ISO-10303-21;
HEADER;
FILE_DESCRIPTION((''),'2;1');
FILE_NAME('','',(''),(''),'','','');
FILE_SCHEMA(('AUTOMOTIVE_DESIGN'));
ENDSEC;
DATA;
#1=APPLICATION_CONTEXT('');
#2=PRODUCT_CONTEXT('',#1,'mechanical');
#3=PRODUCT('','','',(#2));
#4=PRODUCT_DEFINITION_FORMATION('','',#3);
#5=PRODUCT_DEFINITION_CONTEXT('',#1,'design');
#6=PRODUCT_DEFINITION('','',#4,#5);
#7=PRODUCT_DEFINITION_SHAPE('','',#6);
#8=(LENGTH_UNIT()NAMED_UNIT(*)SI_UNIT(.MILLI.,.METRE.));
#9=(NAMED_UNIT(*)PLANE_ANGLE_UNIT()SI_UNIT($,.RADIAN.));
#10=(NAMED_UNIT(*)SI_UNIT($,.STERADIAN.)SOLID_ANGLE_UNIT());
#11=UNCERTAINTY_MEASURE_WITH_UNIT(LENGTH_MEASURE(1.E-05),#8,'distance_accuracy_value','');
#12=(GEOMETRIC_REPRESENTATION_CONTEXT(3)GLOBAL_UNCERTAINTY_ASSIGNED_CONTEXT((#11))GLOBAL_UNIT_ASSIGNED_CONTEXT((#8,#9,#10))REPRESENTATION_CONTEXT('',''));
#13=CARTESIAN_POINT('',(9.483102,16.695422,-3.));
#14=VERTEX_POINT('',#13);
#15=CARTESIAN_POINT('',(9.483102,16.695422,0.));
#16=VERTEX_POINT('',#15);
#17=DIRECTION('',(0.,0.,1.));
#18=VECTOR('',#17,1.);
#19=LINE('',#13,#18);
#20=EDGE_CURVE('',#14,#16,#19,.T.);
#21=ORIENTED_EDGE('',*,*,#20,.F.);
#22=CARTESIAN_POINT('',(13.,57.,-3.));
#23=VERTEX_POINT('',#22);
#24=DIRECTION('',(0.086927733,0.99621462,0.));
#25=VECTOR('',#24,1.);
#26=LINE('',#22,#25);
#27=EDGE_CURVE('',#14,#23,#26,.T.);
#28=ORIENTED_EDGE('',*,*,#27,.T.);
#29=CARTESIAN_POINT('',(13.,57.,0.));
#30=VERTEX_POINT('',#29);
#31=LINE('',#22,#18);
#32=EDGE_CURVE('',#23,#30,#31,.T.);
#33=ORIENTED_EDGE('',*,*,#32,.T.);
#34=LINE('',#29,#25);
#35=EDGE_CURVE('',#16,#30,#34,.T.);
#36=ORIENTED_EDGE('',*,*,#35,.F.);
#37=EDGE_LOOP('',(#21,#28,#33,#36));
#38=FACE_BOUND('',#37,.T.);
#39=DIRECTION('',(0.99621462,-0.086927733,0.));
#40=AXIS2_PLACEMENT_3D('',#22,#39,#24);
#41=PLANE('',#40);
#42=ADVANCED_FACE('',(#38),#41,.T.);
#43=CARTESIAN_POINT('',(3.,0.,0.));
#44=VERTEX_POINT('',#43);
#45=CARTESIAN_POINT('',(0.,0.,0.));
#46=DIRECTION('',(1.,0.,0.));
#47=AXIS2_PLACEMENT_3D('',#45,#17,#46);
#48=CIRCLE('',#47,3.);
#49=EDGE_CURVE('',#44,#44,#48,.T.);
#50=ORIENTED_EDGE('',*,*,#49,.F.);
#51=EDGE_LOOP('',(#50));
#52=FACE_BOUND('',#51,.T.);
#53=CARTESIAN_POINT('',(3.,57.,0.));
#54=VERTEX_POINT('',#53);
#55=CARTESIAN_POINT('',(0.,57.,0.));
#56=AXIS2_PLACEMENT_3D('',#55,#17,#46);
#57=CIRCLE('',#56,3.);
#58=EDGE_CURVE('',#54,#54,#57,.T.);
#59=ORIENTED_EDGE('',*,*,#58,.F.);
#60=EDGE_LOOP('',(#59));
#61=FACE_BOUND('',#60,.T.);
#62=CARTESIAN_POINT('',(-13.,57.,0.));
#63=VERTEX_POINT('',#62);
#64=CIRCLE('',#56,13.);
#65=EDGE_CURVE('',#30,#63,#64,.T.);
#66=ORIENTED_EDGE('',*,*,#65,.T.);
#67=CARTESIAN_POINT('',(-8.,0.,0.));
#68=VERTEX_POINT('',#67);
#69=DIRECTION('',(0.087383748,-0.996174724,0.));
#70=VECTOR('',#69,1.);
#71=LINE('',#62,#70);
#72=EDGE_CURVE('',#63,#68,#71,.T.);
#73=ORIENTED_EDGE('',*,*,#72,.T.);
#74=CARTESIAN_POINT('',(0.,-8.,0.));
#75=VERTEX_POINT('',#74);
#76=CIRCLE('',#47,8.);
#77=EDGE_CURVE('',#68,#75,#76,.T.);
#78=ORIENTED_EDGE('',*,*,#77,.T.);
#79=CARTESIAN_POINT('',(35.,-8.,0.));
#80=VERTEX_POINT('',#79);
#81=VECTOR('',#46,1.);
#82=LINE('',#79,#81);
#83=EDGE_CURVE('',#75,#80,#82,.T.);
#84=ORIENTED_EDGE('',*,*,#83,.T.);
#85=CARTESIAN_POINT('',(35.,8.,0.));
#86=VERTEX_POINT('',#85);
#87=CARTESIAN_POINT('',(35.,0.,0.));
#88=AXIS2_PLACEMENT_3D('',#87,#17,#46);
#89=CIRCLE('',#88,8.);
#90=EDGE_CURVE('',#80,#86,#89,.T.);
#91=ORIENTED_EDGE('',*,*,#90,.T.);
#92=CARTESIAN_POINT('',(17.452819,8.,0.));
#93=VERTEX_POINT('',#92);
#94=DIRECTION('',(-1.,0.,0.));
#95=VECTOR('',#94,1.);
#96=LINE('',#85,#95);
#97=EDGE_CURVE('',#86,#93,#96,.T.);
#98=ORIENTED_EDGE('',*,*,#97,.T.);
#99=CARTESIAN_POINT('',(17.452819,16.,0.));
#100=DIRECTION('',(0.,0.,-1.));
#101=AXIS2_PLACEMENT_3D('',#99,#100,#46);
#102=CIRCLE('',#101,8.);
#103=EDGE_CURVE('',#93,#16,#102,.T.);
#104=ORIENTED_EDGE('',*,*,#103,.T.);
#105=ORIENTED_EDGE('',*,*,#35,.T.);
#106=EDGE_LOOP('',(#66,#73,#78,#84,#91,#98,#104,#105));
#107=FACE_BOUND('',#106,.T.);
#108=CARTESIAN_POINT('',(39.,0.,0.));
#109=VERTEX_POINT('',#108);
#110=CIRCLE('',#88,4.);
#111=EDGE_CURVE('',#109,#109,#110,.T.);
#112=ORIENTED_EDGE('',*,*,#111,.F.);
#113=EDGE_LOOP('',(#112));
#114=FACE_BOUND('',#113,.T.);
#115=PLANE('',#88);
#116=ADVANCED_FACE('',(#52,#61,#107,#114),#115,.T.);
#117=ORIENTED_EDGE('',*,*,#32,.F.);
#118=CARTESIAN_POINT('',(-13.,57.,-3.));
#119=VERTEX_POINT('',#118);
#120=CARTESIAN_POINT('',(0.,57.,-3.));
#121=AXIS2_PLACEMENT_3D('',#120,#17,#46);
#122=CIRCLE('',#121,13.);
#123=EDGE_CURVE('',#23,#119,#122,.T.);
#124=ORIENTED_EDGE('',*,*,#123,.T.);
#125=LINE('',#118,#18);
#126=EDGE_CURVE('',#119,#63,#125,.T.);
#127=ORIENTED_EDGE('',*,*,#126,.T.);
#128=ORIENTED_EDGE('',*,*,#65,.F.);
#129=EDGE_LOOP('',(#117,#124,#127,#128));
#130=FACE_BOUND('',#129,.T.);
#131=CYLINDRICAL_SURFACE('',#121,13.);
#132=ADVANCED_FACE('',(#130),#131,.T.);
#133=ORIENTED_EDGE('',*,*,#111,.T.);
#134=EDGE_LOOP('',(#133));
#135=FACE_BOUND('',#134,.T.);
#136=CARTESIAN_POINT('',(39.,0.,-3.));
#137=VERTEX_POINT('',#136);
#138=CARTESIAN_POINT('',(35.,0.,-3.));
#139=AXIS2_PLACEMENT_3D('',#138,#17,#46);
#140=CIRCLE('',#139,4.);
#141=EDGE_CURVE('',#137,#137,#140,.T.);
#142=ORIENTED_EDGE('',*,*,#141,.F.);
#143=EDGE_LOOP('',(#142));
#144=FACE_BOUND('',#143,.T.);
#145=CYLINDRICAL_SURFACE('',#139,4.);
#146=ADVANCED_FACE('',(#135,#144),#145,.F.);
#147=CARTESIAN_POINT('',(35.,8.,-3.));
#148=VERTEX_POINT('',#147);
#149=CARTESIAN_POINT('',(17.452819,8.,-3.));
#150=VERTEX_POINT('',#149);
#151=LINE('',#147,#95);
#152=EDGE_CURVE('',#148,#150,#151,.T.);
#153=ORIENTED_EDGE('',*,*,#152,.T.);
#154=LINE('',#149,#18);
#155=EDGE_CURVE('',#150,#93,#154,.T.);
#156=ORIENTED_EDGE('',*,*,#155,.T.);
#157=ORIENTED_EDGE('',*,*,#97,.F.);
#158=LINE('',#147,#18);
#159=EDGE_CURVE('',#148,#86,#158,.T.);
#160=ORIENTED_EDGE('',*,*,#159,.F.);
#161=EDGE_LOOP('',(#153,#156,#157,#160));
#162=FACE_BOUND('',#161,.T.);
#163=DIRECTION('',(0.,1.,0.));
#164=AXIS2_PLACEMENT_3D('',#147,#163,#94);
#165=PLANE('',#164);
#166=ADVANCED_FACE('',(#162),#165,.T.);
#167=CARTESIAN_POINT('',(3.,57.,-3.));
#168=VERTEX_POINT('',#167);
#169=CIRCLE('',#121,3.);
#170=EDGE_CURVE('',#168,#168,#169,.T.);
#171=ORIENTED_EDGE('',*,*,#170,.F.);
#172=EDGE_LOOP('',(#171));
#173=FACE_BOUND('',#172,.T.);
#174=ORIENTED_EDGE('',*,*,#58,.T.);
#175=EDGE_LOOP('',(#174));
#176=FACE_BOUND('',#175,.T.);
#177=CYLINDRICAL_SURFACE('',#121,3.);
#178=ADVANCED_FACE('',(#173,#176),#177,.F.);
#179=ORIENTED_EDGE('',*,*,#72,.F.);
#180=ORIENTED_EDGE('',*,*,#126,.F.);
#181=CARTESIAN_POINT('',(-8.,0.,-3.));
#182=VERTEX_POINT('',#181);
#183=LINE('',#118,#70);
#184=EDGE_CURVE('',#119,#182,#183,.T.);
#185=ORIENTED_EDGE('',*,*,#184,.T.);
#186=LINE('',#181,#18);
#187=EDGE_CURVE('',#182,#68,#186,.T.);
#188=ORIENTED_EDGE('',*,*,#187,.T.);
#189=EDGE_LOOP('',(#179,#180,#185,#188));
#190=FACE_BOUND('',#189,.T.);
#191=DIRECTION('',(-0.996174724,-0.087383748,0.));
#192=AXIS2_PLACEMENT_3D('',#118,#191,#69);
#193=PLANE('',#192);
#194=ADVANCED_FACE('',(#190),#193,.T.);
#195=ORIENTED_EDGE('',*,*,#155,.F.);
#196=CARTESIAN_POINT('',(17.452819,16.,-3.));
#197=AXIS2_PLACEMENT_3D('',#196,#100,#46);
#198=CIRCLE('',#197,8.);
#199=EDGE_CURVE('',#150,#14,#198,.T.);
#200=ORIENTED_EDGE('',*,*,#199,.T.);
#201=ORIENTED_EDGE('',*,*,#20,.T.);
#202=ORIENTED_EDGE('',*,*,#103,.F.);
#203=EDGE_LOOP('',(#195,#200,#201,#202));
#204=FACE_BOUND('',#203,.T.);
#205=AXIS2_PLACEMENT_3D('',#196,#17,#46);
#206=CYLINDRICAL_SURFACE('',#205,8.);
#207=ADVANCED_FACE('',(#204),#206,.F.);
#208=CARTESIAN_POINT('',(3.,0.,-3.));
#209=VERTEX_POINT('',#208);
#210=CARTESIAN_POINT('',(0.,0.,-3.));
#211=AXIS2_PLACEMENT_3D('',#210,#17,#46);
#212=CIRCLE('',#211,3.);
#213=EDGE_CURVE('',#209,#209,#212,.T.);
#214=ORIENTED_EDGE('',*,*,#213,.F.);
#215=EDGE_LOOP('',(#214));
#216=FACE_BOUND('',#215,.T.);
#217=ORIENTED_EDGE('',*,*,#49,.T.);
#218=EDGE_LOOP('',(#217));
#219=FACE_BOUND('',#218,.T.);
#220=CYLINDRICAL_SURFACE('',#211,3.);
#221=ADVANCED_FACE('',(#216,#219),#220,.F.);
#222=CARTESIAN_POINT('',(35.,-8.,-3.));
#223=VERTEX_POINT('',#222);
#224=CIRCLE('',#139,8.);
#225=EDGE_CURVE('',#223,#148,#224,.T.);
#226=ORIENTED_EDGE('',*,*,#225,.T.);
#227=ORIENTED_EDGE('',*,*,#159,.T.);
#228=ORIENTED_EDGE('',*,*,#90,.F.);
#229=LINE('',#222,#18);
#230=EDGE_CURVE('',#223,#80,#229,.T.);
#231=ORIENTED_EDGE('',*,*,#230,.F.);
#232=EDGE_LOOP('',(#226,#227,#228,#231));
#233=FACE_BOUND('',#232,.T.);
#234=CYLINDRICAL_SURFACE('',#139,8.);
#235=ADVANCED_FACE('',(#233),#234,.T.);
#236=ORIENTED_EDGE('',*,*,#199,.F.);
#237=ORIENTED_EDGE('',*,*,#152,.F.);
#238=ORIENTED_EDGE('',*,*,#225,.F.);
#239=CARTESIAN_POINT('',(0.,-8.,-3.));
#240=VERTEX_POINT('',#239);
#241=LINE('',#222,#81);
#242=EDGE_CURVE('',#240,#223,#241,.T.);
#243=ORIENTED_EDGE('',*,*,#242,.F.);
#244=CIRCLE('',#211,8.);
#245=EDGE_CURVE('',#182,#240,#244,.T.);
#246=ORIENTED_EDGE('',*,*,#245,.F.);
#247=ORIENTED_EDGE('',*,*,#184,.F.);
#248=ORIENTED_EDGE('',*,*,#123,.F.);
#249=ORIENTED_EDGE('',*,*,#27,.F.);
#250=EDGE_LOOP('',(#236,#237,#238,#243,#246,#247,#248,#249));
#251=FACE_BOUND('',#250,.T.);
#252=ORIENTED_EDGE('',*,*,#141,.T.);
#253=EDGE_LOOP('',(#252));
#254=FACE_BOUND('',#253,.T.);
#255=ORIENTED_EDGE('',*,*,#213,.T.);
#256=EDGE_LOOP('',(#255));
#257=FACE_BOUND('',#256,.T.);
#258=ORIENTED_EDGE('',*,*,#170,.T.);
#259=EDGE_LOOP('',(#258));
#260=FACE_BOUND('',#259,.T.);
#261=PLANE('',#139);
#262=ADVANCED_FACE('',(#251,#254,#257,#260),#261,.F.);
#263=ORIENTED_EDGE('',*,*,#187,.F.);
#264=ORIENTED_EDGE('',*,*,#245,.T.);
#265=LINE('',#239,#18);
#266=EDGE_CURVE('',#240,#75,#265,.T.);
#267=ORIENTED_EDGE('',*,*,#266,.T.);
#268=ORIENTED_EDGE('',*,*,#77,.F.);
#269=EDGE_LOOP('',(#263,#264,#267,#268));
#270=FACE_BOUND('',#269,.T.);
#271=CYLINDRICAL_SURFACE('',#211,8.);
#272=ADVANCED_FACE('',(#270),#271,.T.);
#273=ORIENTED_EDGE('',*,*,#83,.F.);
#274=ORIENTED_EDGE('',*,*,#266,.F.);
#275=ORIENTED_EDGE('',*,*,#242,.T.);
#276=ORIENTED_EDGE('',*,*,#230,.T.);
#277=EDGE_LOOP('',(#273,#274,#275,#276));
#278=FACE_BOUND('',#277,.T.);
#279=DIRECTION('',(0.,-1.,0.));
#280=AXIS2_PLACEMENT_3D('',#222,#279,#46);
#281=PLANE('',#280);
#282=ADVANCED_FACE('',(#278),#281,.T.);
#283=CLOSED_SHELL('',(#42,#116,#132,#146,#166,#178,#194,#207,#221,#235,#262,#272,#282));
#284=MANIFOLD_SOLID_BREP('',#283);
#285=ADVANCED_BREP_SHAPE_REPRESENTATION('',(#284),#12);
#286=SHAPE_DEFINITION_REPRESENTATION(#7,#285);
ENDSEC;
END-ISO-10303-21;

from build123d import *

# Parameters (mm, degrees)
SCHIZZO1_R          = 4
SCHIZZO1_R_2        = 3
BASE_FLANGIA3_DEPTH = 3


# Sheet-metal steps are written as plain solids
with BuildPart() as part:
    # Schizzo1 → Base-Flangia3 (new body)
    with BuildSketch(Plane.XY):
        with BuildLine():
            Line((35, -8), (0, -8))
            ThreePointArc((0, -8), (-5.656854249, -5.656854249), (-8, 0))
            Line((-8, 0), (-13, 57))
            ThreePointArc((-13, 57), (0, 70), (13, 57))
            Line((13, 57), (9.483101588, 16.695421866))
            ThreePointArc((9.483101588, 16.695421866), (11.555218404, 10.594603388), (17.452818548, 8))
            Line((17.452818548, 8), (35, 8))
            ThreePointArc((35, 8), (43, 0), (35, -8))
        make_face()
        with Locations((35, 0)):
            Circle(SCHIZZO1_R, mode=Mode.SUBTRACT)
        Circle(SCHIZZO1_R_2, mode=Mode.SUBTRACT)
        with Locations((0, 57)):
            Circle(SCHIZZO1_R_2, mode=Mode.SUBTRACT)
    extrude(amount=-BASE_FLANGIA3_DEPTH)


solid = part.part
